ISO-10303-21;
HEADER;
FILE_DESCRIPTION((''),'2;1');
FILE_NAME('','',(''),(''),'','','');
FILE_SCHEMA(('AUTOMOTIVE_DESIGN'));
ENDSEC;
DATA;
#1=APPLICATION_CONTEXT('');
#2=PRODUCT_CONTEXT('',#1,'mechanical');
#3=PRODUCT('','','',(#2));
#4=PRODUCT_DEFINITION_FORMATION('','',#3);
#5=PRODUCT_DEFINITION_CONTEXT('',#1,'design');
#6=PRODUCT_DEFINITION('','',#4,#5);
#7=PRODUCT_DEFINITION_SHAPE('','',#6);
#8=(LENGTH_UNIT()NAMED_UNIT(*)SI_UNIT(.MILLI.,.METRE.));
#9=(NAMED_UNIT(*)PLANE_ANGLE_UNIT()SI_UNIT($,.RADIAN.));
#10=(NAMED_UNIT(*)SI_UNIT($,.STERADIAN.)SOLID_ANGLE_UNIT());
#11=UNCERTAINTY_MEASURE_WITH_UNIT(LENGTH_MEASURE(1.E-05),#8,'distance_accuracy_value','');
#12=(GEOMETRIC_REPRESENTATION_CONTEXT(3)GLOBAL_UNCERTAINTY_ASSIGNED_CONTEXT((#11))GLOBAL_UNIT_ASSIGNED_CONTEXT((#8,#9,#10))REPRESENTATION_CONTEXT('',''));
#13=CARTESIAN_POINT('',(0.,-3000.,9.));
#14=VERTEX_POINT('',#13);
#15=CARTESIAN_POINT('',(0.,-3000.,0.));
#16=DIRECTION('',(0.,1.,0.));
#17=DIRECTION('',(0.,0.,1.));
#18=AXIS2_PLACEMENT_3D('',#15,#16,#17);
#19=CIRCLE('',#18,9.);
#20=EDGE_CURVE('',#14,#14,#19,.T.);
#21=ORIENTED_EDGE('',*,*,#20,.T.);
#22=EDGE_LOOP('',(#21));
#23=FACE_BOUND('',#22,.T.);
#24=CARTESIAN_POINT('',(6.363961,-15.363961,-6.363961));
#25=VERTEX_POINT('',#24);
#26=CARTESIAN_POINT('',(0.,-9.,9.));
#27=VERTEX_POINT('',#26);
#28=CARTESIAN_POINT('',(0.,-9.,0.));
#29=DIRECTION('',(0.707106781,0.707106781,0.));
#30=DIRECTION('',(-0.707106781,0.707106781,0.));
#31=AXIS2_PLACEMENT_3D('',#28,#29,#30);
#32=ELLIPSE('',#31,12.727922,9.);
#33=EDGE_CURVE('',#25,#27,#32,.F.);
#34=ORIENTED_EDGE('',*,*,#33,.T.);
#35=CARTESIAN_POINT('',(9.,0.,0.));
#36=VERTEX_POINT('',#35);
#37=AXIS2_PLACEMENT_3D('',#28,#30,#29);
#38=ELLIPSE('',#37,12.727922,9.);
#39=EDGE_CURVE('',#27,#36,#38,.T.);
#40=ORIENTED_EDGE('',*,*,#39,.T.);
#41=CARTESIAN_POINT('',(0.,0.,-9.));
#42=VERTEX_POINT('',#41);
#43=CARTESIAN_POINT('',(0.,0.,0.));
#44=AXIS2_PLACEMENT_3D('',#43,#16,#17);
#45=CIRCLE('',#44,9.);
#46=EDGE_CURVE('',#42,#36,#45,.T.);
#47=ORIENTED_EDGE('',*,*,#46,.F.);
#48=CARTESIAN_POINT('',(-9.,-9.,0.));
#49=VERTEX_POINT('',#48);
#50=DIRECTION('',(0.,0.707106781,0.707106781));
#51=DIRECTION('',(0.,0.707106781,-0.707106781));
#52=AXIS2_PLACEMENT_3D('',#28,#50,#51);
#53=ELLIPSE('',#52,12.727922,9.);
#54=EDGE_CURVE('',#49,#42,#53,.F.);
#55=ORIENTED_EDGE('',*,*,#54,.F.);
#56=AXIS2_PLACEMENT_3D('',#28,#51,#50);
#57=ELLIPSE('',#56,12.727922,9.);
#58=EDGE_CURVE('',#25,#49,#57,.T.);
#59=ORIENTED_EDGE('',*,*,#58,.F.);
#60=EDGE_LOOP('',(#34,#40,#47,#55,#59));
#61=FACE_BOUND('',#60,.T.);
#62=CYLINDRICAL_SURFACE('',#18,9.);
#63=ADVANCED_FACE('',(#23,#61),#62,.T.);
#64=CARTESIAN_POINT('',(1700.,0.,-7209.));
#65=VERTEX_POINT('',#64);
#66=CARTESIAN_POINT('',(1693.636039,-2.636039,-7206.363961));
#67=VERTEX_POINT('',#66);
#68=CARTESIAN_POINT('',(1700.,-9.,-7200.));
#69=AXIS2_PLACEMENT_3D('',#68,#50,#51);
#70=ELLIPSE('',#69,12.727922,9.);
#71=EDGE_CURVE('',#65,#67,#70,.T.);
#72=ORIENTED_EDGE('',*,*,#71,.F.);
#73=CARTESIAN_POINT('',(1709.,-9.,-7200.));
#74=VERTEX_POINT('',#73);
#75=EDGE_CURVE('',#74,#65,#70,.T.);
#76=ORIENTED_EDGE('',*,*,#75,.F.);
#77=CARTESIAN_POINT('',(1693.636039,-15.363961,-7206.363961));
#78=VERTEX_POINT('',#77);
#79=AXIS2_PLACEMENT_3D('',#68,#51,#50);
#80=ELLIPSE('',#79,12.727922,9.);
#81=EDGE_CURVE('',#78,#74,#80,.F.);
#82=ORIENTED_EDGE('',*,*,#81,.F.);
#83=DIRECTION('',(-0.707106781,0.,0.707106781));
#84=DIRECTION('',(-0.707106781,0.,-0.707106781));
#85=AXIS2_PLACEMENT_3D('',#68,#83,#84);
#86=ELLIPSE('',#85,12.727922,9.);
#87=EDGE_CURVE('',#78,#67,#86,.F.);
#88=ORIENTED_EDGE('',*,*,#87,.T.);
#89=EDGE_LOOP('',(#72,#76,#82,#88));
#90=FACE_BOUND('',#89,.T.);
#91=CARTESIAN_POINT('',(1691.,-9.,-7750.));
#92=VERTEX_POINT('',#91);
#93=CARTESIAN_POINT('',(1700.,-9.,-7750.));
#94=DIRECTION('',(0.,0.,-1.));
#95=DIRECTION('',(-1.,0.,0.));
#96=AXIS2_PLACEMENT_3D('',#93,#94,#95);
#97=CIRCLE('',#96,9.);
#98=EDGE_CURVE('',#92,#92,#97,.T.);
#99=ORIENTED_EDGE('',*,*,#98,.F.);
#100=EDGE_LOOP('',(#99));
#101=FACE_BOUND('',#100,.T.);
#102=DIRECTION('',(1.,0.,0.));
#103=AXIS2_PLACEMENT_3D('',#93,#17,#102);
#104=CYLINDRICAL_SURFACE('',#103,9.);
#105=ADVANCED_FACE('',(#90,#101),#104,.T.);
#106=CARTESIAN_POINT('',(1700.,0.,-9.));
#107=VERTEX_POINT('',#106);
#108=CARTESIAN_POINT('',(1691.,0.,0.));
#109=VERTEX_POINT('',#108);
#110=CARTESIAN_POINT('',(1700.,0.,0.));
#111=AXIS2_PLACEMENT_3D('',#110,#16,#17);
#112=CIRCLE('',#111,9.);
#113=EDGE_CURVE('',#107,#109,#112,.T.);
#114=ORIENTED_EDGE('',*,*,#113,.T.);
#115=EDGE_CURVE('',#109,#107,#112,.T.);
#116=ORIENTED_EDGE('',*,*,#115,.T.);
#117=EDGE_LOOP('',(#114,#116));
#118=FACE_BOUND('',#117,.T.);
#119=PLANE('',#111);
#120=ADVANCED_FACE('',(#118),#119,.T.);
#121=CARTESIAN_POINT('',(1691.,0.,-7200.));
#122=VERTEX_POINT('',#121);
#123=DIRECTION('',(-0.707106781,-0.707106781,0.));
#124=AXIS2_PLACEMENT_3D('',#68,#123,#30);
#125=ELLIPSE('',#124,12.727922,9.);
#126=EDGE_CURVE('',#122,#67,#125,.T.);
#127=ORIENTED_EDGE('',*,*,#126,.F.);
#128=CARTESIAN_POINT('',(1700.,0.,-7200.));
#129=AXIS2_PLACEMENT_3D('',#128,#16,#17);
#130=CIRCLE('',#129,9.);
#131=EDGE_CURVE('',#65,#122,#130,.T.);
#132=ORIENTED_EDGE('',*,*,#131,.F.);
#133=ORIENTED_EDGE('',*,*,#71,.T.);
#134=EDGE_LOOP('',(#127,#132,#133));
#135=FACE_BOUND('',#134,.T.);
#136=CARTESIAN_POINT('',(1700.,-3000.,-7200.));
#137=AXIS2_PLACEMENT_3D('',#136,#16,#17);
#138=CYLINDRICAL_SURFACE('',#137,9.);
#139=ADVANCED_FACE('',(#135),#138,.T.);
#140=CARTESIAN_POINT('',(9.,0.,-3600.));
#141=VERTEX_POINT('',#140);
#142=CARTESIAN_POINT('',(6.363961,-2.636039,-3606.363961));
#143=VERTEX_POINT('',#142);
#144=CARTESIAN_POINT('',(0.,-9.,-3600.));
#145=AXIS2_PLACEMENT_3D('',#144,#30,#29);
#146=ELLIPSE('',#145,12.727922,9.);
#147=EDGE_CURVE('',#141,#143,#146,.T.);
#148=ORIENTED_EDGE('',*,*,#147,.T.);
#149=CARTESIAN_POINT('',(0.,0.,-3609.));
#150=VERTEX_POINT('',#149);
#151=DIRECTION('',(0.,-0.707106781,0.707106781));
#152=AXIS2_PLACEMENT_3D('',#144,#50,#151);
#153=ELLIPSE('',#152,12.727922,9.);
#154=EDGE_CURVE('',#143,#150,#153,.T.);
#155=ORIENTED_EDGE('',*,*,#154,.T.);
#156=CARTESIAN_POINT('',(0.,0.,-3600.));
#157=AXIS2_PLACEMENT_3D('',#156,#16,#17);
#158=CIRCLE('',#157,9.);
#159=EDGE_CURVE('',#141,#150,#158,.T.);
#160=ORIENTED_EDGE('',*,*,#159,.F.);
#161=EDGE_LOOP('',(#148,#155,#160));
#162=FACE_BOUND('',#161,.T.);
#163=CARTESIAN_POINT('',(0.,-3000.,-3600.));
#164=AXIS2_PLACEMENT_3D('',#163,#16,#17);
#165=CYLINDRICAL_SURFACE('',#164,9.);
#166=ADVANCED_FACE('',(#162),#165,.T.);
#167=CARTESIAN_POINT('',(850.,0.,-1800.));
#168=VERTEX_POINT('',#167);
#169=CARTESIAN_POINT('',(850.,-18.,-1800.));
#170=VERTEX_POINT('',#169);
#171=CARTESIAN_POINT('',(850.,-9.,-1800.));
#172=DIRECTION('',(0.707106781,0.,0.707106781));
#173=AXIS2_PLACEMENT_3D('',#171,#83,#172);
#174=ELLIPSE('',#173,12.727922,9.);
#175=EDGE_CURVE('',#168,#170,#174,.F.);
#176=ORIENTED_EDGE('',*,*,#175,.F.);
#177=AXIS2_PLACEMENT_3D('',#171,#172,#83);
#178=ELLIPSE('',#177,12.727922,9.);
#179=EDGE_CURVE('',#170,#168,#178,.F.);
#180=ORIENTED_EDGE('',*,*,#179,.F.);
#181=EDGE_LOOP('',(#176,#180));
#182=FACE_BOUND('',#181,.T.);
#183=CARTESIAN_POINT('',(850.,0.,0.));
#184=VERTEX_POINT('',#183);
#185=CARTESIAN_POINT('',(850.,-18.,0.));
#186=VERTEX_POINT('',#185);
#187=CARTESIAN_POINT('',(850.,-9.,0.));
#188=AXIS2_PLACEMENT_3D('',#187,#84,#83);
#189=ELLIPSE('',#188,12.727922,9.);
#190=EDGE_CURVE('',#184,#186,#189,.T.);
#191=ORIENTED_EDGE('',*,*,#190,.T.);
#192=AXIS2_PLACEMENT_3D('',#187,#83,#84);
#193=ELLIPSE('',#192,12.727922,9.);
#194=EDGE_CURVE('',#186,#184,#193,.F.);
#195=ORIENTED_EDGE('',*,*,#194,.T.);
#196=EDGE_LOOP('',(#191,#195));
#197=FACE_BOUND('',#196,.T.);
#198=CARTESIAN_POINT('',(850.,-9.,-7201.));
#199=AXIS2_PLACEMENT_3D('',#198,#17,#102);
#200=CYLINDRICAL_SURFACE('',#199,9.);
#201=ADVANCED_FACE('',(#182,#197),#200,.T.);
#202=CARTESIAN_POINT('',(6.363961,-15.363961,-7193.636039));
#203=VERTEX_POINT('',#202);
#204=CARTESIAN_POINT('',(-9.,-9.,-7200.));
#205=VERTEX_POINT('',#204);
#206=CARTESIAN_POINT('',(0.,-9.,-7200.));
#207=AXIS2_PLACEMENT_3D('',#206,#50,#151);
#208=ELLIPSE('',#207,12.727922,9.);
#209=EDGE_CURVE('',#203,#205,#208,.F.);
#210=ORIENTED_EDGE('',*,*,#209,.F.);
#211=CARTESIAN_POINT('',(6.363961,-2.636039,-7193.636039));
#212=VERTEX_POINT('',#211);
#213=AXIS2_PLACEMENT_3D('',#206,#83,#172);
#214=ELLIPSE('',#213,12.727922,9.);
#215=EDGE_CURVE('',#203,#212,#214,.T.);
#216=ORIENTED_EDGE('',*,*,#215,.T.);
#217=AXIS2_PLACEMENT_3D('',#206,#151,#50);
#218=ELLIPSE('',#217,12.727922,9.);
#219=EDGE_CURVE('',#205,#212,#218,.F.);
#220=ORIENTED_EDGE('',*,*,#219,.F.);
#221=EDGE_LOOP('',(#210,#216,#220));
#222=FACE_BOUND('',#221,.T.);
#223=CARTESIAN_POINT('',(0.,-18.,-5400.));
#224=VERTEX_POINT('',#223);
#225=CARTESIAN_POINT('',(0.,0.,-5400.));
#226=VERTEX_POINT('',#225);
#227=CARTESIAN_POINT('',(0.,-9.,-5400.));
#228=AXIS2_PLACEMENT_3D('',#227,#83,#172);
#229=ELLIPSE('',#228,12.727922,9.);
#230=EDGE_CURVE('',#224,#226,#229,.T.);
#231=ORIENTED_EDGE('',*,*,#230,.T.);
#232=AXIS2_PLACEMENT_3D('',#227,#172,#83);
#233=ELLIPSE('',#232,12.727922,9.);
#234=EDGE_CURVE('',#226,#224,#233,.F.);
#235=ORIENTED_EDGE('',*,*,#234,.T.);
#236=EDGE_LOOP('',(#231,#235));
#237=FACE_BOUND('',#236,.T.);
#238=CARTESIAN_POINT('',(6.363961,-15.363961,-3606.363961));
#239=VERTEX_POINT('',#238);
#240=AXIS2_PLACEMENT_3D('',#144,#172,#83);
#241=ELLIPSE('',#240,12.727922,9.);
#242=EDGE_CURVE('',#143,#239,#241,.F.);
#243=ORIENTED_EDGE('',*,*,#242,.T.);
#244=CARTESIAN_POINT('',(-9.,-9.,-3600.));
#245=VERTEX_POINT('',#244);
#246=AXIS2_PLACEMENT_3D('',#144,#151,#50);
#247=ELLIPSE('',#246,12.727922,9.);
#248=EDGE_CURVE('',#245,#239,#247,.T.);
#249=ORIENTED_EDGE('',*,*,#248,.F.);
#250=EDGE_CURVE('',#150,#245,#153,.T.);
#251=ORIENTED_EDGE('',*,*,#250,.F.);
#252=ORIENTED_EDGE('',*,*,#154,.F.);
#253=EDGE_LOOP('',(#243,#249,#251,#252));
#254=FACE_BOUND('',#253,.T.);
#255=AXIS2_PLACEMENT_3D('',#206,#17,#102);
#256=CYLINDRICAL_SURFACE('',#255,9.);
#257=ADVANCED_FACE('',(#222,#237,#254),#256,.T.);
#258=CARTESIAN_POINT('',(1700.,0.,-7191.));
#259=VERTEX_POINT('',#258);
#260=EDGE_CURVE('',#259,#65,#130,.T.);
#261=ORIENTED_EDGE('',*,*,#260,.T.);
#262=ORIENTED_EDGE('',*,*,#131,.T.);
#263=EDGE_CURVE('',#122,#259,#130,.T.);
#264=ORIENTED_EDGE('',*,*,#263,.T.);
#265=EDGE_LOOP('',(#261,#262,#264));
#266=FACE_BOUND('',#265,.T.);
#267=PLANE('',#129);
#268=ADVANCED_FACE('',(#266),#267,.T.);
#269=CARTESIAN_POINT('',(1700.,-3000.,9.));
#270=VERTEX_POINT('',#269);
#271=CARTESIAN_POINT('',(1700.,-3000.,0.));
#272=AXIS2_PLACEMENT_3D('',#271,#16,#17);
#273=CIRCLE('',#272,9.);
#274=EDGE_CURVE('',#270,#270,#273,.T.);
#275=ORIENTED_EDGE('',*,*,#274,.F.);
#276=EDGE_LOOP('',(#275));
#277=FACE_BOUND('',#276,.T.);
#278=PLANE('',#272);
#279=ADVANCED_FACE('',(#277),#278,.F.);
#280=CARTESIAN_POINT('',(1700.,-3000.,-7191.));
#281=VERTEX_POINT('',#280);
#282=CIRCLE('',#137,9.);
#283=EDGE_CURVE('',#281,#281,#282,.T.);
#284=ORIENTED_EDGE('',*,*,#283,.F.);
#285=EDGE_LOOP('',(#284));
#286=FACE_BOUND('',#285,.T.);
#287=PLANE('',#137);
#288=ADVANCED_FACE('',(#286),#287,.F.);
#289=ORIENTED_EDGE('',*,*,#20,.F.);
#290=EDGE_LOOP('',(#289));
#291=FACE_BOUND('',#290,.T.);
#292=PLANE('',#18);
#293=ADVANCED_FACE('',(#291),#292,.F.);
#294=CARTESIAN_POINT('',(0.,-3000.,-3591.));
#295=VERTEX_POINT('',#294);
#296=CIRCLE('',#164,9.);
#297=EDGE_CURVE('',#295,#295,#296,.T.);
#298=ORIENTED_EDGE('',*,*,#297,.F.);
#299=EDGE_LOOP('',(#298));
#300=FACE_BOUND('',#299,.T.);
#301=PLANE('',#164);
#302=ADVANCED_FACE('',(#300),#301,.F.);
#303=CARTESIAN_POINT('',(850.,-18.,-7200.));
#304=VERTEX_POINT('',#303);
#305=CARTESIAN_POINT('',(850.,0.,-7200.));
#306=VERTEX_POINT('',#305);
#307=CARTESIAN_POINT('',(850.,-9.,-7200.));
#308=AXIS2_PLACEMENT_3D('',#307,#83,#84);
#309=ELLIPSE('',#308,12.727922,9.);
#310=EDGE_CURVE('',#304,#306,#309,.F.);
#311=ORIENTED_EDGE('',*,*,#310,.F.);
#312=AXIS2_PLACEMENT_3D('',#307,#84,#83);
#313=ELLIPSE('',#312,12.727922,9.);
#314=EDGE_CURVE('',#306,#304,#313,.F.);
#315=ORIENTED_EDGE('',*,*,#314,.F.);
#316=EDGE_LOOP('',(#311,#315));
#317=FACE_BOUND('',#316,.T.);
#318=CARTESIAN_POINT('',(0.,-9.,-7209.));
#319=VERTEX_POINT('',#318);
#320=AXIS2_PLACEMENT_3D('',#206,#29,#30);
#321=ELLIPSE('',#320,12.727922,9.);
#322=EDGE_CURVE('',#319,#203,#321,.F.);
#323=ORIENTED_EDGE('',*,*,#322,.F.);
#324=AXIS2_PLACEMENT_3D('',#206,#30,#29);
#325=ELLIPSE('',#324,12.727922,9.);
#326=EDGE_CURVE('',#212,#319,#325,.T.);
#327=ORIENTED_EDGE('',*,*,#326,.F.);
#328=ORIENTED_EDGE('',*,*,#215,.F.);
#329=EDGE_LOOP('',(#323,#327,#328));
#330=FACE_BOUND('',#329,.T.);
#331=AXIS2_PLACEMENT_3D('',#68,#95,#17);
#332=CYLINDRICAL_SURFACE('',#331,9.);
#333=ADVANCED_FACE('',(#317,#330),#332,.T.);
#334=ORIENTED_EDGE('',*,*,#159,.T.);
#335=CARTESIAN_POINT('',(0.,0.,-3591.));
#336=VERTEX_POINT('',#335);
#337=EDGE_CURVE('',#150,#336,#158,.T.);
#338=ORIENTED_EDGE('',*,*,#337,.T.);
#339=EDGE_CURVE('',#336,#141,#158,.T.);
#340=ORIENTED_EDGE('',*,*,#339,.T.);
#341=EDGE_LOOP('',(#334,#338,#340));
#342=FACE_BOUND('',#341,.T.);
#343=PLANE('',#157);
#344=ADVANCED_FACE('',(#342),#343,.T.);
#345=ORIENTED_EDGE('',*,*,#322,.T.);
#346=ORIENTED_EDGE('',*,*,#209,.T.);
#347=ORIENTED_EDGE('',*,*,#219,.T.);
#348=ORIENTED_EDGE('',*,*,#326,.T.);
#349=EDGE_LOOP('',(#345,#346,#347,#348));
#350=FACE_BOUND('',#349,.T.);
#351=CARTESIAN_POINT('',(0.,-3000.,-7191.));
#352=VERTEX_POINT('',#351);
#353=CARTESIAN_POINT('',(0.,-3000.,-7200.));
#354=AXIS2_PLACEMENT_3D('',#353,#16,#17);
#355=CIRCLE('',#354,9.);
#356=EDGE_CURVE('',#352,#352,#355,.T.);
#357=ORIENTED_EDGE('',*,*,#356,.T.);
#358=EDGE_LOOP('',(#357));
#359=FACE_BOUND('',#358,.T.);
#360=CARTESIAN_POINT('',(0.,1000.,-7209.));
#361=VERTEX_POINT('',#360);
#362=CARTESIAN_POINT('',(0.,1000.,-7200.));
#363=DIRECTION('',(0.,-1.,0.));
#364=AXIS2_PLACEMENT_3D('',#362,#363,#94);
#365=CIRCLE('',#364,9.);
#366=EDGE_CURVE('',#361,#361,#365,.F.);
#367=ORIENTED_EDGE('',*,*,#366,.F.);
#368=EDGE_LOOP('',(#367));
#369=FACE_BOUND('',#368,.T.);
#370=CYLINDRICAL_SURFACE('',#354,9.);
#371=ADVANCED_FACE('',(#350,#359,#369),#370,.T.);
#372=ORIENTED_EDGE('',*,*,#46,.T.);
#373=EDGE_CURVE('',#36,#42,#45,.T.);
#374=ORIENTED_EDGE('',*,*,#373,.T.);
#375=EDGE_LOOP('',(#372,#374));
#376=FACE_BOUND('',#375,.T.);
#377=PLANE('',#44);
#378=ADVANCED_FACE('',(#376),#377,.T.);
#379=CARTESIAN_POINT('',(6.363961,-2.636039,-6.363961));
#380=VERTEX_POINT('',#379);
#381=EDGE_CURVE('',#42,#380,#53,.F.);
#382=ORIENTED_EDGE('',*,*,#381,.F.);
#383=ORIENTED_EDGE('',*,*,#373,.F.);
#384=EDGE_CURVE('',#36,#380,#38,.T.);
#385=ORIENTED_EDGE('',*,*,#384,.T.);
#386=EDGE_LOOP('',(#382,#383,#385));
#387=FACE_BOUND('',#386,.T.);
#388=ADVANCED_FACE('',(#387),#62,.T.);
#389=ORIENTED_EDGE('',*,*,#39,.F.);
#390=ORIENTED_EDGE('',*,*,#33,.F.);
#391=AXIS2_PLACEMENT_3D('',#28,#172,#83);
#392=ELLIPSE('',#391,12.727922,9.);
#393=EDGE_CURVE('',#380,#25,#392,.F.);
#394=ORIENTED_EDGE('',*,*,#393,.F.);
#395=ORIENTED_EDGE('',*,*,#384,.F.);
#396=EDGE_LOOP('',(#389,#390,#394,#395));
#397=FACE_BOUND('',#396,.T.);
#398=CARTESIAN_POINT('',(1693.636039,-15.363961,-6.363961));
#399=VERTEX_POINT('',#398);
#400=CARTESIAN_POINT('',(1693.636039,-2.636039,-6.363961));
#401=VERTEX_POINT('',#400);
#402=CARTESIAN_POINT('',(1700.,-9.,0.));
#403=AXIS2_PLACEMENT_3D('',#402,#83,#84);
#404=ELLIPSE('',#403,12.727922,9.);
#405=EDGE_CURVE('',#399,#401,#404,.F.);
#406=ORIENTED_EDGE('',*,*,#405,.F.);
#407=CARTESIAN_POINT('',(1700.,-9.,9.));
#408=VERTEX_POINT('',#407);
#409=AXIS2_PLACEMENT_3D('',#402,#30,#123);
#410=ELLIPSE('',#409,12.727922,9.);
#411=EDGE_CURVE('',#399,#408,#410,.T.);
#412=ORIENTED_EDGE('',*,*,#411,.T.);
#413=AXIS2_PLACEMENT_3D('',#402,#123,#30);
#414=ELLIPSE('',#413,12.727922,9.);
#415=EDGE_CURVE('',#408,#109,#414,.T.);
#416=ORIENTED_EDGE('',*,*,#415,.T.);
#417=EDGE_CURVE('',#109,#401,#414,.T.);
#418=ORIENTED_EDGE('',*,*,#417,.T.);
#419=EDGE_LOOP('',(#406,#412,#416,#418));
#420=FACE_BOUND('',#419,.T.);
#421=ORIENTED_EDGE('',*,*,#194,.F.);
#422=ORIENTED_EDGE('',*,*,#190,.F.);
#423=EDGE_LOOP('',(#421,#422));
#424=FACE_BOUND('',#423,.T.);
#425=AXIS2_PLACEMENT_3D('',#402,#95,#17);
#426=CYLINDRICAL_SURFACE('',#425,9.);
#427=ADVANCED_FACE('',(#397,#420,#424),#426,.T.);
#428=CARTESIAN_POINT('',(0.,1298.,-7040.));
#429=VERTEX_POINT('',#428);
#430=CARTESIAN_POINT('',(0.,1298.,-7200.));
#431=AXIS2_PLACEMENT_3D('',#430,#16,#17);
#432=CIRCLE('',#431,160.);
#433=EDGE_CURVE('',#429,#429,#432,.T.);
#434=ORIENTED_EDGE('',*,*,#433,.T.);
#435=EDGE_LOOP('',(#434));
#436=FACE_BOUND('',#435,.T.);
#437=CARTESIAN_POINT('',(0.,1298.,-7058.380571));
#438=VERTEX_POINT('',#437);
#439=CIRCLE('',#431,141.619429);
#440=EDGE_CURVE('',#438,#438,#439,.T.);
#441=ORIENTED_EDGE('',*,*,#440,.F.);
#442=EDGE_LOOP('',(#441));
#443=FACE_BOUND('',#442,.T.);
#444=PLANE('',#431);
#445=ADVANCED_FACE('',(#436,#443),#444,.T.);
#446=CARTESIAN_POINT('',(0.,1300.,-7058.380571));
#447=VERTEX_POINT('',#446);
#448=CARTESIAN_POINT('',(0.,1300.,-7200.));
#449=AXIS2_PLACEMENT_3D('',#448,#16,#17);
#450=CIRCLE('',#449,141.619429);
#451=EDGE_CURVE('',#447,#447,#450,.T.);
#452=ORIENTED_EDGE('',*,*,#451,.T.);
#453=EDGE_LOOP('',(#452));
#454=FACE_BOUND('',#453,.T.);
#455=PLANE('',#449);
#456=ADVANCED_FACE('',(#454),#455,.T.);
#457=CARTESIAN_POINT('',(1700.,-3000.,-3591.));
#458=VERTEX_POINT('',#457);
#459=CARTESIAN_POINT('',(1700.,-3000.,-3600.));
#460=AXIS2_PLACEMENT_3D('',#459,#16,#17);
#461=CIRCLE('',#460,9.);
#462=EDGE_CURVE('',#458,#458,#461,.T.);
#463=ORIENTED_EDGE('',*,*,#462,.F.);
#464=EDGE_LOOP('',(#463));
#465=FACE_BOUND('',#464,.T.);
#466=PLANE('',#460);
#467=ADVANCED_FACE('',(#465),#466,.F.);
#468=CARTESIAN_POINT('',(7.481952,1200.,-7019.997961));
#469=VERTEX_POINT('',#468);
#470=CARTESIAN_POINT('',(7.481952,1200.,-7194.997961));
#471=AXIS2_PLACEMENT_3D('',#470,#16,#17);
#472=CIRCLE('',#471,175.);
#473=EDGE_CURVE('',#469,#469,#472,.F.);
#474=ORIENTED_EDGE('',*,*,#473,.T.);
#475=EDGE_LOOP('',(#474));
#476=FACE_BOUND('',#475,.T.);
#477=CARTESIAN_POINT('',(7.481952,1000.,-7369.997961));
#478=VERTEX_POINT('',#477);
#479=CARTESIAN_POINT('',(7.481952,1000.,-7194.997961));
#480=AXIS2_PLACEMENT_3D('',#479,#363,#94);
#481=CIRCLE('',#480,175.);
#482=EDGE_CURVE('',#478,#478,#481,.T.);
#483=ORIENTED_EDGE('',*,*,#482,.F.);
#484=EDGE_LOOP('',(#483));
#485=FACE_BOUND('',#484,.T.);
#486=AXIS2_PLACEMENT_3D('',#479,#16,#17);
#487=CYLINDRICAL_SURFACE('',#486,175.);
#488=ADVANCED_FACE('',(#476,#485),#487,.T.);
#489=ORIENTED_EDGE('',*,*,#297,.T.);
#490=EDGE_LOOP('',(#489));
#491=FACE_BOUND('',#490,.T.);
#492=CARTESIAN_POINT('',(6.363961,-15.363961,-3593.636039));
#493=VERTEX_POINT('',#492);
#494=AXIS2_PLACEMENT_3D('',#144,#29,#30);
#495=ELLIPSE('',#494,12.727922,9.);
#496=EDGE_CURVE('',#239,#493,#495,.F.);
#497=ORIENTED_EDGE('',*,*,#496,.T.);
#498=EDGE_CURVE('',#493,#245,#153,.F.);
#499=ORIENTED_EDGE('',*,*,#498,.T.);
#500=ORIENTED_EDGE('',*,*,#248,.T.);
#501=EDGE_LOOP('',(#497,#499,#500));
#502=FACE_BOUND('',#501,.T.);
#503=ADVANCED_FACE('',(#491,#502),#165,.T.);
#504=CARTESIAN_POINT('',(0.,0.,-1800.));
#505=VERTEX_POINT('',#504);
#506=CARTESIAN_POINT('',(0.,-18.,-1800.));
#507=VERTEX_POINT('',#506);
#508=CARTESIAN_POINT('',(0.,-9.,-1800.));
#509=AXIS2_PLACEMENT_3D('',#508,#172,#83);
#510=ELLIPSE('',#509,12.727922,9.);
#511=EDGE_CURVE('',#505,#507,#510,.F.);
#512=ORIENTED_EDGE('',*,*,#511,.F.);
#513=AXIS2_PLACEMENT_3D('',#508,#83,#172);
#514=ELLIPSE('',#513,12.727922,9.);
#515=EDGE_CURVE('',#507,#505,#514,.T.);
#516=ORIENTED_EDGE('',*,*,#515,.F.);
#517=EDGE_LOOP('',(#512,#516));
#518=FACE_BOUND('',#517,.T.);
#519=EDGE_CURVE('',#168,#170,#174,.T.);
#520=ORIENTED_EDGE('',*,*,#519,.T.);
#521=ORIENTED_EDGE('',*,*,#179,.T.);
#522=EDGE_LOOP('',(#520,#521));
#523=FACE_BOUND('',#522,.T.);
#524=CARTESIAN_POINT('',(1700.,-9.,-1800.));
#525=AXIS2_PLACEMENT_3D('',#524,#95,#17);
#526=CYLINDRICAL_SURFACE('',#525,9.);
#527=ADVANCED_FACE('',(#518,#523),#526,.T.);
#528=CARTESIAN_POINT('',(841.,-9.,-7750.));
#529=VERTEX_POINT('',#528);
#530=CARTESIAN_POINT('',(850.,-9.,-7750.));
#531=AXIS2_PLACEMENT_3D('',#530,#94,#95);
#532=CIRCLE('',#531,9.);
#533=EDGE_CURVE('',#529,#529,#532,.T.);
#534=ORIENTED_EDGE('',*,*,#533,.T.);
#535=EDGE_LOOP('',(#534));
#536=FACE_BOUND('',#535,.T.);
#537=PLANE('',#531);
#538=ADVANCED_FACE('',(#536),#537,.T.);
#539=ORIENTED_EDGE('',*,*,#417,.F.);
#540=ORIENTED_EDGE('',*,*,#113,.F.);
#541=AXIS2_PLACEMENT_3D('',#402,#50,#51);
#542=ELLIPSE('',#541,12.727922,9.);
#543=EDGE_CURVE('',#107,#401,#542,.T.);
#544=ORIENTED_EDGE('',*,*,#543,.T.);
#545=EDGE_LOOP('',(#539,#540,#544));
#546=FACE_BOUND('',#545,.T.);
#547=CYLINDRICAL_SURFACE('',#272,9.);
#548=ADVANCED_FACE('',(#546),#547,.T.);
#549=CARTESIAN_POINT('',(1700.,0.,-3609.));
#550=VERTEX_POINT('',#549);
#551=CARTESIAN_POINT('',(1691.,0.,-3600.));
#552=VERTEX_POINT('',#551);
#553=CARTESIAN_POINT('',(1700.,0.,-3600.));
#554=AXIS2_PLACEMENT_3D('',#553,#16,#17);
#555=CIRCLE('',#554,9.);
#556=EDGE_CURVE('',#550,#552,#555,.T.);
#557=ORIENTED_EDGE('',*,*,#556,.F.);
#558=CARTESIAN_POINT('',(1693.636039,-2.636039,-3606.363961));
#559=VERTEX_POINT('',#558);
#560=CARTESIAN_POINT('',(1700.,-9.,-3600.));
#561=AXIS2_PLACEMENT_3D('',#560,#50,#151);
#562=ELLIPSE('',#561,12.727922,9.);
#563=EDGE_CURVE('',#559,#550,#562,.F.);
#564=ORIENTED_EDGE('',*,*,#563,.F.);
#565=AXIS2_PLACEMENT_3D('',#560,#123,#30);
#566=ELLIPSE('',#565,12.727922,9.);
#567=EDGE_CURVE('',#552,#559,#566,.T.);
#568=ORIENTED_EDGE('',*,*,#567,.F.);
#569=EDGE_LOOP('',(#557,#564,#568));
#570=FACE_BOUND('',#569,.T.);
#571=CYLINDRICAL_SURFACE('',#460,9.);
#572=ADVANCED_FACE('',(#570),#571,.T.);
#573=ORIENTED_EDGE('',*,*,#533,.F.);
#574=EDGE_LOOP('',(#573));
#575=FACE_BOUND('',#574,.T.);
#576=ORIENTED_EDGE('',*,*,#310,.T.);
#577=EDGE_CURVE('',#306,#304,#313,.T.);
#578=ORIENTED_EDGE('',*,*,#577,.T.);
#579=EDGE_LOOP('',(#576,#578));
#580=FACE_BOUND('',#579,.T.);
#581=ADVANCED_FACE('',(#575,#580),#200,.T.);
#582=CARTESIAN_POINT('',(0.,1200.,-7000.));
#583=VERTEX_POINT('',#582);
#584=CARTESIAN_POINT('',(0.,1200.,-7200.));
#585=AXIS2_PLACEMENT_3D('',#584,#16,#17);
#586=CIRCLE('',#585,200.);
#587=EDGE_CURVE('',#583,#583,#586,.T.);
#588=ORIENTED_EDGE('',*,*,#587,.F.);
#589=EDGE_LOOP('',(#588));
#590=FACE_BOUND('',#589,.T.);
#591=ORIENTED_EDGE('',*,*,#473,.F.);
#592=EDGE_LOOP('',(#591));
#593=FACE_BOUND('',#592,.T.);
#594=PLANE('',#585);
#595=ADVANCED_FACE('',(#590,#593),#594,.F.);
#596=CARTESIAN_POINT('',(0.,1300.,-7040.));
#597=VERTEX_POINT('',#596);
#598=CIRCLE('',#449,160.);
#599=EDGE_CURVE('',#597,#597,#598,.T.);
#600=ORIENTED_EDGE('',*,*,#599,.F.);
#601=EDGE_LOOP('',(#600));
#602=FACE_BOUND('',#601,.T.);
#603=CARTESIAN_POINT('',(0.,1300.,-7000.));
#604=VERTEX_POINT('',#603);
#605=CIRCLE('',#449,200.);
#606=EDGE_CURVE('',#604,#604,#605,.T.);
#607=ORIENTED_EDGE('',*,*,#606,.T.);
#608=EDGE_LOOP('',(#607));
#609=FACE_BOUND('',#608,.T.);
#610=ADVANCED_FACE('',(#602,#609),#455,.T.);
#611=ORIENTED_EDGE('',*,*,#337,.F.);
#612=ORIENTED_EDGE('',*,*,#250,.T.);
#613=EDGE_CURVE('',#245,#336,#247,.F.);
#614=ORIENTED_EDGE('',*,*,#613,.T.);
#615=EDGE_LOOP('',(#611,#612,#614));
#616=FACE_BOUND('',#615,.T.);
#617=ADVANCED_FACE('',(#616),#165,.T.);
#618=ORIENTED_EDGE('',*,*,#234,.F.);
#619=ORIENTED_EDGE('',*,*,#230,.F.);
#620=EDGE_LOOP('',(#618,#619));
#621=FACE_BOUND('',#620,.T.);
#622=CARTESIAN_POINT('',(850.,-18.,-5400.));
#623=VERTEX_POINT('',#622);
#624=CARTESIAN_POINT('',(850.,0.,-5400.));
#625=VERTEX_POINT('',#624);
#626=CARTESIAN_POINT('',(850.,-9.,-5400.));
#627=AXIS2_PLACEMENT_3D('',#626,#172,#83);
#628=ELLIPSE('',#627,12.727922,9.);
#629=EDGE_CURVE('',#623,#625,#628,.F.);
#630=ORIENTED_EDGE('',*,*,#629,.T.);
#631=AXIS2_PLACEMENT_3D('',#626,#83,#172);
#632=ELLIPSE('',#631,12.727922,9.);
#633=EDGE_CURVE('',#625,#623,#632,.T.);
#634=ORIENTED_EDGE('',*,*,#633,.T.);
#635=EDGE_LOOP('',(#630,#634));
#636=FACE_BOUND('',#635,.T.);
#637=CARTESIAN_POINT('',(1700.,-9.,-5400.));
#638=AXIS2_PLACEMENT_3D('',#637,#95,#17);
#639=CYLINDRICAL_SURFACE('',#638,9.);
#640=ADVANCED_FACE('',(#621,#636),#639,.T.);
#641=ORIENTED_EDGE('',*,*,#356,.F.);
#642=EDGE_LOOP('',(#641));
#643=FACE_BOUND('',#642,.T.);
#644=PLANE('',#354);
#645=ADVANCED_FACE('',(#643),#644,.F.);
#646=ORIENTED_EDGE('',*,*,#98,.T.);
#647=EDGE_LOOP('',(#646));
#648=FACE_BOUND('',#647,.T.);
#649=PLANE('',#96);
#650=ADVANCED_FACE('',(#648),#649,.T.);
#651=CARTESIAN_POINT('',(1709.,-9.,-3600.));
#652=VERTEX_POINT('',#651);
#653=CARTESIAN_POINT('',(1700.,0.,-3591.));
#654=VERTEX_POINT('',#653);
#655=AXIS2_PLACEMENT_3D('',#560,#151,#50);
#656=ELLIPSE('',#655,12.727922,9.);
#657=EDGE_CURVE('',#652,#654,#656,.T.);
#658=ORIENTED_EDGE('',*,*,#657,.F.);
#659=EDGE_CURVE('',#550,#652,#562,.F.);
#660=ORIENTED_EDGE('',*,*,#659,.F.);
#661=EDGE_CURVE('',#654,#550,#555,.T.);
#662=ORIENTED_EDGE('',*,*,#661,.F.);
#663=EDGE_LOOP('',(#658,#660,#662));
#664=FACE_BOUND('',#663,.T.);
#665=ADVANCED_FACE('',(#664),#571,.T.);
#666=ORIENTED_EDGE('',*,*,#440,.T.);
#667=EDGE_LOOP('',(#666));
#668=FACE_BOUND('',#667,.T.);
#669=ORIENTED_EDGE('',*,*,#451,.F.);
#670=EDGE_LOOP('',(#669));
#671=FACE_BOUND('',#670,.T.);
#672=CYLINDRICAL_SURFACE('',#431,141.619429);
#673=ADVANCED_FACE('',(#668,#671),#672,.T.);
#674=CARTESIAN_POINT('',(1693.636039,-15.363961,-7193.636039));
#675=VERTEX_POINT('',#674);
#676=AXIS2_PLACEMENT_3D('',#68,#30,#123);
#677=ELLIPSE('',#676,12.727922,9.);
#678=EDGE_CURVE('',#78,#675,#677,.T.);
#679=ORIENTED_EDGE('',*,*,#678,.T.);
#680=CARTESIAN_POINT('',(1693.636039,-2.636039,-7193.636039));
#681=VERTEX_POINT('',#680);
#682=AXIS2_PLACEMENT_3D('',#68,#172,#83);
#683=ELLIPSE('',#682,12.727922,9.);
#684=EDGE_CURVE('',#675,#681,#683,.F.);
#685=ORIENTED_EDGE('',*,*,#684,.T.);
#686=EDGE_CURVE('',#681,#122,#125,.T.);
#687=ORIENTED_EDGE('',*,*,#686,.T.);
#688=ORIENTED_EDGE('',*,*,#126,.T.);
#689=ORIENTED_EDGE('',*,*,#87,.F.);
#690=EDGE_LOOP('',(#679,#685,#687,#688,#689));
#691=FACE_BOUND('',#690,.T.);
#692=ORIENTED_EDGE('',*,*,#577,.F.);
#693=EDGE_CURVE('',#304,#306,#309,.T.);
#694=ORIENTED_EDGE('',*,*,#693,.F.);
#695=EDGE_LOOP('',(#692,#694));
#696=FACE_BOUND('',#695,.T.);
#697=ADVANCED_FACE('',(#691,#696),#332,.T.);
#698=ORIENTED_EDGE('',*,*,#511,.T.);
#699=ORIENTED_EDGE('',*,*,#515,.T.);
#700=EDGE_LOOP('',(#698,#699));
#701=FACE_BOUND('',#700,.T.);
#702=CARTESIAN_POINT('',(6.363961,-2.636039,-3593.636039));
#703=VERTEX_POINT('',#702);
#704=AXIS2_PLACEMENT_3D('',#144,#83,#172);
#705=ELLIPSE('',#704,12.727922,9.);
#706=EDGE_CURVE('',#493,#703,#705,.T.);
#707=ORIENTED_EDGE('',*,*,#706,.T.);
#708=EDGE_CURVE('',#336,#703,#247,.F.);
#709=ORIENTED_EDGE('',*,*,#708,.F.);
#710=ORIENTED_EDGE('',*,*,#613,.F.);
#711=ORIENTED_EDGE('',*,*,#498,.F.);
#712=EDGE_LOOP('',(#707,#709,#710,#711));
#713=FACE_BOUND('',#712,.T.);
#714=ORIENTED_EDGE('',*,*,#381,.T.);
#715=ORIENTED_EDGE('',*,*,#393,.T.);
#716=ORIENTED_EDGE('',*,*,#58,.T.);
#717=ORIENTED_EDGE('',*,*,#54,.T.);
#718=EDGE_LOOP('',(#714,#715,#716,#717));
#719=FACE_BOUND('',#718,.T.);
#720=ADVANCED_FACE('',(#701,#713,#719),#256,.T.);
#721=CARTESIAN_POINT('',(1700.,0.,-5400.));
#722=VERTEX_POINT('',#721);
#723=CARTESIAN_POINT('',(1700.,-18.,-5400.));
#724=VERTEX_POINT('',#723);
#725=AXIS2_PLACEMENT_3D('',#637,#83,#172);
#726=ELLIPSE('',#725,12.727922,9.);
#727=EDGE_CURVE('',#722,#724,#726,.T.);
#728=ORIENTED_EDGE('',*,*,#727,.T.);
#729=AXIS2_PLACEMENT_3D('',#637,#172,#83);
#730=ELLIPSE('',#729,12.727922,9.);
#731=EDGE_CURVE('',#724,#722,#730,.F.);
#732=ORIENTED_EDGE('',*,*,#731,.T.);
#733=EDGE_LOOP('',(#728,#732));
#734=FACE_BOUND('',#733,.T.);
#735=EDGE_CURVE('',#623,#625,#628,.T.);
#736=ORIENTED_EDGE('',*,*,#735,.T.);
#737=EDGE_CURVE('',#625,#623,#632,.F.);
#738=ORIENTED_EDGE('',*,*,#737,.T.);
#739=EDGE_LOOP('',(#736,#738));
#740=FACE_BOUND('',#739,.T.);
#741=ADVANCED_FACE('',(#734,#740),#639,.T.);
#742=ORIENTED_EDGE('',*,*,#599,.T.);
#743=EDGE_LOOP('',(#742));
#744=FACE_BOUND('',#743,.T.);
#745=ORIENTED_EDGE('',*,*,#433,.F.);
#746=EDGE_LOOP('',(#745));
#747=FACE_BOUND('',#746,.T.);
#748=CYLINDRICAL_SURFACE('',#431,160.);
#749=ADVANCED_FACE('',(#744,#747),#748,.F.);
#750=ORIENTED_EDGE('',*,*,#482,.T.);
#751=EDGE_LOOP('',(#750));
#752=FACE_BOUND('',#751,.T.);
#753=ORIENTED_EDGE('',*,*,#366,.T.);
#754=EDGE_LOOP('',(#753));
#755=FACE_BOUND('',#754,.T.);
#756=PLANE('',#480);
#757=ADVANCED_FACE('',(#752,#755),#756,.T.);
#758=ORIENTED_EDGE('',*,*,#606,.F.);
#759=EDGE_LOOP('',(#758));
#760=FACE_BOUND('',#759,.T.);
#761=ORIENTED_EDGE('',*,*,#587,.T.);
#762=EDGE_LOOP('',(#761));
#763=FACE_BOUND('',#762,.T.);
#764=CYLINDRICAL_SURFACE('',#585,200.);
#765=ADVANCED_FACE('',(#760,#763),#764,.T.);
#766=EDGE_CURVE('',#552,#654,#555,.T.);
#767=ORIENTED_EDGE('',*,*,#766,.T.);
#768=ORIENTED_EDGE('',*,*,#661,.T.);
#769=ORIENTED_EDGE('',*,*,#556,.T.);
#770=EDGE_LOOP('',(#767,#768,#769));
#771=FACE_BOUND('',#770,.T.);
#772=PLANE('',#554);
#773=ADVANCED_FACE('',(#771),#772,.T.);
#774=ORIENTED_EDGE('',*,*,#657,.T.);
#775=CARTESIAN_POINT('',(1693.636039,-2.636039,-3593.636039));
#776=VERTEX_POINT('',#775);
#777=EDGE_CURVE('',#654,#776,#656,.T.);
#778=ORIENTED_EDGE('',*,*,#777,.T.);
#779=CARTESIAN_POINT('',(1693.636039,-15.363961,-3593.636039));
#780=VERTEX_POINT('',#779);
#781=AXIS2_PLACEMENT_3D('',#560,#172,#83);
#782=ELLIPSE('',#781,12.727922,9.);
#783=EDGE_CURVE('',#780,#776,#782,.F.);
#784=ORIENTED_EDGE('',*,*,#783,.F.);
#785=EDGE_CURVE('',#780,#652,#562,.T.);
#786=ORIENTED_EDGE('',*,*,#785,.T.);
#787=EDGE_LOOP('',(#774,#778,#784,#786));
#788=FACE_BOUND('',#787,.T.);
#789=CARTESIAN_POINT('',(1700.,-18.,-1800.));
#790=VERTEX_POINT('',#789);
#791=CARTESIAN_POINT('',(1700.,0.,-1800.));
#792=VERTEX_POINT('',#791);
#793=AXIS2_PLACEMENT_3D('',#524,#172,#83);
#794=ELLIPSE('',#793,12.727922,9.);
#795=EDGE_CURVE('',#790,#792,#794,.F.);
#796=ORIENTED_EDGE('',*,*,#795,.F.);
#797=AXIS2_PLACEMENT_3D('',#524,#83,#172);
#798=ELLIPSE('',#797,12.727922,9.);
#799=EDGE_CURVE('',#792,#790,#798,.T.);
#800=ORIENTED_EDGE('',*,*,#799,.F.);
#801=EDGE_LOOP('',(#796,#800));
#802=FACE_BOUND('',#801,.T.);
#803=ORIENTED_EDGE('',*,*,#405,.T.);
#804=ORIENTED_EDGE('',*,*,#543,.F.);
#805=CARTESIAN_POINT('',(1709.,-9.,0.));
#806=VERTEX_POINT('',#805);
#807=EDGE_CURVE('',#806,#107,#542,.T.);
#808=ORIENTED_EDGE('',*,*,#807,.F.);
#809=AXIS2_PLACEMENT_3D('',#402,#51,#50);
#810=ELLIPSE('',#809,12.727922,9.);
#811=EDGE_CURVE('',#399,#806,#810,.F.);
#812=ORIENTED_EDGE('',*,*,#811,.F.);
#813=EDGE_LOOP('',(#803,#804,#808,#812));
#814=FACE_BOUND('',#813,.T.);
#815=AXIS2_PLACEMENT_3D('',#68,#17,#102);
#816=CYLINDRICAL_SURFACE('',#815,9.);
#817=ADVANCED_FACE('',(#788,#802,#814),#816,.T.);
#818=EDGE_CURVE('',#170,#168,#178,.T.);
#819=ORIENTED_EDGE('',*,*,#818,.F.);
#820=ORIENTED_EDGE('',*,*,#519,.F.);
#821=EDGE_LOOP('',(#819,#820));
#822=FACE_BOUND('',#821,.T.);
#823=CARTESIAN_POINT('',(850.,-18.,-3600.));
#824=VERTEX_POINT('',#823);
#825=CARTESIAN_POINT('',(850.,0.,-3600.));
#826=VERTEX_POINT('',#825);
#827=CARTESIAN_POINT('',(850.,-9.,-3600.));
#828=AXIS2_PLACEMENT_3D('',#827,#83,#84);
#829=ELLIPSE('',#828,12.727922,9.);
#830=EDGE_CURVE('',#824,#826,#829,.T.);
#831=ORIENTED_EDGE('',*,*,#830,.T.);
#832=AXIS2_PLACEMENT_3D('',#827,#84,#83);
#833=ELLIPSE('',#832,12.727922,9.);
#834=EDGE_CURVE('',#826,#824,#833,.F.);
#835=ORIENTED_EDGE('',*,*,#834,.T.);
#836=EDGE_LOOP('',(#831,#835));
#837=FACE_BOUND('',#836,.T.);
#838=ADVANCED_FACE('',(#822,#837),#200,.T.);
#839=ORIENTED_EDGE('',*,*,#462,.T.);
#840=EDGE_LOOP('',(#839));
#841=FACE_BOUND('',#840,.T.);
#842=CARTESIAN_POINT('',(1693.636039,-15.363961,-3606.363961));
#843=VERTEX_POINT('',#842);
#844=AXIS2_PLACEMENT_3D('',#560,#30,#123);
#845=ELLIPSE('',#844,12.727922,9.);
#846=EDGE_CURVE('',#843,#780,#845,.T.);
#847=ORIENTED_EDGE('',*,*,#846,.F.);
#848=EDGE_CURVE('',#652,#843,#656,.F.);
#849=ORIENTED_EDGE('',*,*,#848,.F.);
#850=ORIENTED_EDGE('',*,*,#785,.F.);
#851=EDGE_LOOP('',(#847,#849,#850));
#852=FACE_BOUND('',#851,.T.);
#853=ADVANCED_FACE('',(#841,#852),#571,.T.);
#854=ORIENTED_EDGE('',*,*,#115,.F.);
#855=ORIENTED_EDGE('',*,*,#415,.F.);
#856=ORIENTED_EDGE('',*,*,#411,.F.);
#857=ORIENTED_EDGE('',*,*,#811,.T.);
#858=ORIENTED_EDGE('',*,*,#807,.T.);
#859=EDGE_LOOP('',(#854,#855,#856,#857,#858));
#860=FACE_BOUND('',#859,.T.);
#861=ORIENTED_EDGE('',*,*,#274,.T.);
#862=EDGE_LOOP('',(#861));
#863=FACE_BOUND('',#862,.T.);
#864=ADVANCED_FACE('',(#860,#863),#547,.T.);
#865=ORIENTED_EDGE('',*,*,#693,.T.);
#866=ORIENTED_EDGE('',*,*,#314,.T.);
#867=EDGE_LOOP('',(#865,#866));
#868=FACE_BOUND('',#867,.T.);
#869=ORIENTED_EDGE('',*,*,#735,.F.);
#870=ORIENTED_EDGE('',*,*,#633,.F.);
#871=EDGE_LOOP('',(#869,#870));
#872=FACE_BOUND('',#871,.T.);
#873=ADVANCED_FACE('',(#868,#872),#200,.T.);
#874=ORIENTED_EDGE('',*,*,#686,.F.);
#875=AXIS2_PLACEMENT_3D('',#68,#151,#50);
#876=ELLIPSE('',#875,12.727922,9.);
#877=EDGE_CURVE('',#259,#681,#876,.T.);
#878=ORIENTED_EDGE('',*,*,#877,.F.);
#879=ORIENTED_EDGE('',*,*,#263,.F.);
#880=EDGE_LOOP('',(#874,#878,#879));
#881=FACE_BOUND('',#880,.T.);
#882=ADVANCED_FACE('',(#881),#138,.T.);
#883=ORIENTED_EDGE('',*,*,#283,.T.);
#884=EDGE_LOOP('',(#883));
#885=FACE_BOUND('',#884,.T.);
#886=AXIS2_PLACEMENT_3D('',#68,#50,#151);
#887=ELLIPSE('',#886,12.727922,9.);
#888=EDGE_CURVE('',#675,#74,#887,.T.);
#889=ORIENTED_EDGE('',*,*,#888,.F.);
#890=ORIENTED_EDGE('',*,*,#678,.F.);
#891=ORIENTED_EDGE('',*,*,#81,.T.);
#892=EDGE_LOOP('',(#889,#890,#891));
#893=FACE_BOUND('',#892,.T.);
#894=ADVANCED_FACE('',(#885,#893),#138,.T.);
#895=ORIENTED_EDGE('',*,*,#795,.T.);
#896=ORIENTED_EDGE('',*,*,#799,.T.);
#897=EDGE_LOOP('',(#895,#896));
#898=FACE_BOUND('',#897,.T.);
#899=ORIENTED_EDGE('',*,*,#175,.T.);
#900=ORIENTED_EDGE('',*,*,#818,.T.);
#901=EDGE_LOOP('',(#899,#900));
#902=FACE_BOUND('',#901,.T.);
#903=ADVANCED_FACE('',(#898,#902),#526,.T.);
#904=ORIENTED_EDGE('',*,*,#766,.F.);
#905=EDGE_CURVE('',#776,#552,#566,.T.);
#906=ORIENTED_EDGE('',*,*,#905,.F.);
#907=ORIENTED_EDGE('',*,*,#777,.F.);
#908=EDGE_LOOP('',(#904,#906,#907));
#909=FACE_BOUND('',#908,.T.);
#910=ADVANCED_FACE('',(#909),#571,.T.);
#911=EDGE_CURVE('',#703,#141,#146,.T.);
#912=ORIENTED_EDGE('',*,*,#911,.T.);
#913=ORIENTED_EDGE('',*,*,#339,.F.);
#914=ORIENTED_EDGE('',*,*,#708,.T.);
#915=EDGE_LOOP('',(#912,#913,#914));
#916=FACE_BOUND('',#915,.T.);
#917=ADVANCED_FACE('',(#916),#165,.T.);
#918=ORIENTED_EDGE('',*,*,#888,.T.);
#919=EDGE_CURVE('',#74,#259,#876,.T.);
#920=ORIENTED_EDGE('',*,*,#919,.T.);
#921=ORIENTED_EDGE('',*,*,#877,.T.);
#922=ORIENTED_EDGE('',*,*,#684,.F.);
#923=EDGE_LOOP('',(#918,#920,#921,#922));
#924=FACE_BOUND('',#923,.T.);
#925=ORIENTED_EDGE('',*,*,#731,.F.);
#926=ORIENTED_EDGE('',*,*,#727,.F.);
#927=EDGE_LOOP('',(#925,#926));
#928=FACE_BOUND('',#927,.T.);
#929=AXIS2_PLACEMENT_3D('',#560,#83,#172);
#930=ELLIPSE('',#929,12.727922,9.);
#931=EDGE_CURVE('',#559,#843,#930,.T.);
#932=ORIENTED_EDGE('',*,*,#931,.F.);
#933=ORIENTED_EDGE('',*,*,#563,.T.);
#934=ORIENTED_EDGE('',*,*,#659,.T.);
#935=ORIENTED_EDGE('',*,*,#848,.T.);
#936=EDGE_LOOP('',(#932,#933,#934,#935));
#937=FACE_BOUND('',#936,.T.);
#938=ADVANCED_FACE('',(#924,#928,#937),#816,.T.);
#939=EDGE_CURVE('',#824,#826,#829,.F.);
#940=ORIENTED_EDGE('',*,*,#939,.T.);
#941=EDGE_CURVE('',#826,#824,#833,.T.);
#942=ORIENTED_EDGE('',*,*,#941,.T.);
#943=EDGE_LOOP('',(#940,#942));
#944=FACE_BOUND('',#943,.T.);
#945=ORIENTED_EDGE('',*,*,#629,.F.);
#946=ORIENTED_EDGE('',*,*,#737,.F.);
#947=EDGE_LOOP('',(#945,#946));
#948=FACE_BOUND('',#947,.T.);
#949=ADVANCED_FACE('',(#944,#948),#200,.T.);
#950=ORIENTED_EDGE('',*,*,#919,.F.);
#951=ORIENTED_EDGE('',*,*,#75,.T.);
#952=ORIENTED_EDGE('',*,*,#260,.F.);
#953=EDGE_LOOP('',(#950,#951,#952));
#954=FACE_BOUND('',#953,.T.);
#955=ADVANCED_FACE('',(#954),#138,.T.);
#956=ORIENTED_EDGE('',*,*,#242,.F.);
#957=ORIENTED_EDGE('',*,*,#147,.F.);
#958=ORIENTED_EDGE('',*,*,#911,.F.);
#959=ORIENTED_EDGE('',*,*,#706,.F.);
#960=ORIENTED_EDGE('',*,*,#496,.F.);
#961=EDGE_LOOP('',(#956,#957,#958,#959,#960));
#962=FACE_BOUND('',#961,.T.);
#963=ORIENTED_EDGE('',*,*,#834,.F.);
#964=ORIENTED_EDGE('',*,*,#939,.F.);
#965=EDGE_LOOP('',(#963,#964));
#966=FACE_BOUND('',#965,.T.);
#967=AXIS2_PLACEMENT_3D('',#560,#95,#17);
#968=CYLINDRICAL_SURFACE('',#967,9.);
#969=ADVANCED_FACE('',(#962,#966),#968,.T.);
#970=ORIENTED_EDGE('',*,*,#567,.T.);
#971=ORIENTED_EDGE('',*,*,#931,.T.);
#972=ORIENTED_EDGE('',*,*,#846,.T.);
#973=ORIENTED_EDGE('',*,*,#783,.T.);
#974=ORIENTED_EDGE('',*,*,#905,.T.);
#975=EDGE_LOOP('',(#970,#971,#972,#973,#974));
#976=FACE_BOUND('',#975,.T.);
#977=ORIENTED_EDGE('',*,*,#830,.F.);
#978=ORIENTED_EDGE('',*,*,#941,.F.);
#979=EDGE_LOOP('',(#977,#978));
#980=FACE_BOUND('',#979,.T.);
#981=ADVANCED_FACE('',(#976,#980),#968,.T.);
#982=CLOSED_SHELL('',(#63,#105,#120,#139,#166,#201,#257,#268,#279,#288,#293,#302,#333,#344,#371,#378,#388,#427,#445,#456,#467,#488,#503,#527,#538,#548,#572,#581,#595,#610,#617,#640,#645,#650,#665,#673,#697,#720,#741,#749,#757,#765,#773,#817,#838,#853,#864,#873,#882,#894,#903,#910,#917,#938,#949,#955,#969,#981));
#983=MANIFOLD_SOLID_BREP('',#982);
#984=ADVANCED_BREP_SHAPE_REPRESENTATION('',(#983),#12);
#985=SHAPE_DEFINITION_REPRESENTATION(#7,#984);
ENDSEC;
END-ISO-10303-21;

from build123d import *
from build123d.topology import SkipClean

# Parameters (mm, degrees)
CROQUIS1_R               = 9
SALIENTE_EXTRUIR1_DEPTH  = 3000
CROQUIS2_R               = 9
SALIENTE_EXTRUIR2_DEPTH  = 7200
MATRIZL2_COUNT           = 3
MATRIZL2_PITCH           = 3600
CROQUIS3_R               = 9
SALIENTE_EXTRUIR3_DEPTH  = 1700
MATRIZL3_COUNT           = 2
MATRIZL3_PITCH           = 1700
SALIENTE_EXTRUIR5_START  = 1300
CROQUIS6_R               = 9
SALIENTE_EXTRUIR5_DEPTH  = 1300
CROQUIS7_R               = 200
SALIENTE_EXTRUIR6_DEPTH  = 100
CROQUIS8_R               = 175
SALIENTE_EXTRUIR7_DEPTH  = 200
CROQUIS12_R              = 9
SALIENTE_EXTRUIR8_DEPTH  = 7200
MATRIZL4_COUNT           = 3
MATRIZL4_PITCH           = 3600
CROQUIS13_R              = 9
SALIENTE_EXTRUIR10_DEPTH = 3000
CROQUIS15_R              = 9
SALIENTE_EXTRUIR11_DEPTH = 550
CROQUIS17_R              = 9
SALIENTE_EXTRUIR12_DEPTH = 7201
CROQUIS18_R              = 9
SALIENTE_EXTRUIR14_DEPTH = 1700
CROQUIS19_R              = 160
CROQUIS19_R_2            = 141.619429307
CORTAR_EXTRUIR1_DEPTH    = 2
CROQUIS20_R              = 9
SALIENTE_EXTRUIR15_DEPTH = 550


with BuildPart() as part:
    # Croquis1 → Saliente-Extruir1 (new body)
    with BuildSketch(Plane(origin=(0, 0, 0), x_dir=(1, 0, 0), z_dir=(0, 1, 0))):
        Circle(CROQUIS1_R)
    saliente_extruir1 = extrude(amount=-SALIENTE_EXTRUIR1_DEPTH)

    # Croquis2 → Saliente-Extruir2 (add)
    with BuildSketch(Plane.XY):
        with Locations((0, -9)):
            Circle(CROQUIS2_R)
    extrude(amount=-SALIENTE_EXTRUIR2_DEPTH)

    # MatrizL2: Saliente-Extruir1 ×3
    with Locations(*[(0, 0, -i * MATRIZL2_PITCH) for i in range(1, MATRIZL2_COUNT)]):
        add(saliente_extruir1)

    # Croquis3 → Saliente-Extruir3 (add)
    with BuildSketch(Plane(origin=(0, 0, 0), x_dir=(0, 0, -1), z_dir=(1, 0, 0))):
        with Locations((0, -9)):
            Circle(CROQUIS3_R)
    saliente_extruir3 = extrude(amount=SALIENTE_EXTRUIR3_DEPTH)

    # MatrizL3: Saliente-Extruir1 ×2
    with Locations(*[(i * MATRIZL3_PITCH, 0, 0) for i in range(1, MATRIZL3_COUNT)]):
        add(saliente_extruir1)

    # Croquis6 → Saliente-Extruir5 (add)
    with BuildSketch(Plane(origin=(0, 0, 0), x_dir=(1, 0, 0), z_dir=(0, 1, 0)).offset(SALIENTE_EXTRUIR5_START)):
        with Locations((0, 7200)):
            Circle(CROQUIS6_R)
    extrude(amount=-SALIENTE_EXTRUIR5_DEPTH)

    # Croquis7 → Saliente-Extruir6 (add)
    with BuildSketch(Plane(origin=(0, 1300, 0), x_dir=(1, 0, 0), z_dir=(0, 1, 0))):
        with Locations((0, 7200)):
            Circle(CROQUIS7_R)
    extrude(amount=-SALIENTE_EXTRUIR6_DEPTH)

    # Croquis8 → Saliente-Extruir7 (add)
    with BuildSketch(Plane.XZ.offset(-1200)):
        with Locations((7.481952141, -7194.997961199)):
            Circle(CROQUIS8_R)
    extrude(amount=SALIENTE_EXTRUIR7_DEPTH)

    # Croquis12 → Saliente-Extruir8 (add)
    with SkipClean():  # the faces are left unmerged after this step: merging them gives an invalid solid
        with BuildSketch(Plane(origin=(0, 0, 0), x_dir=(-1, 0, 0), z_dir=(0, 0, -1))):
            with Locations((-1700, -9)):
                Circle(CROQUIS12_R)
        extrude(amount=SALIENTE_EXTRUIR8_DEPTH)

    # MatrizL4: Saliente-Extruir3 ×3
    with SkipClean():  # the faces are left unmerged after this step: merging them gives an invalid solid
        with Locations(*[(0, 0, -i * MATRIZL4_PITCH) for i in range(1, MATRIZL4_COUNT)]):
            add(saliente_extruir3)

    # Croquis13 → Saliente-Extruir10 (add)
    with SkipClean():  # the faces are left unmerged after this step: merging them gives an invalid solid
        with BuildSketch(Plane(origin=(0, 0, 0), x_dir=(1, 0, 0), z_dir=(0, 1, 0))):
            with Locations((0, 3600)):
                Circle(CROQUIS13_R)
            with Locations((1700, 3600)):
                Circle(CROQUIS13_R)
            with Locations((1700, 7200)):
                Circle(CROQUIS13_R)
        extrude(amount=-SALIENTE_EXTRUIR10_DEPTH)

    # Croquis15 → Saliente-Extruir11 (add)
    with SkipClean():  # the faces are left unmerged after this step: merging them gives an invalid solid
        with BuildSketch(Plane(origin=(0, 0, -7200), x_dir=(-1, 0, 0), z_dir=(0, 0, -1))):
            with Locations((-1700, -9)):
                Circle(CROQUIS15_R)
        extrude(amount=SALIENTE_EXTRUIR11_DEPTH)

    # Croquis17 → Saliente-Extruir12 (add)
    with SkipClean():  # the faces are left unmerged after this step: merging them gives an invalid solid
        with BuildSketch(Plane(origin=(0, 0, 0), x_dir=(-1, 0, 0), z_dir=(0, 0, -1))):
            with Locations((-850, -9)):
                Circle(CROQUIS17_R)
        extrude(amount=SALIENTE_EXTRUIR12_DEPTH)

    # Croquis18 → Saliente-Extruir14 (add)
    with SkipClean():  # the faces are left unmerged after this step: merging them gives an invalid solid
        with BuildSketch(Plane(origin=(0, 0, 0), x_dir=(0, 0, -1), z_dir=(1, 0, 0))):
            with Locations((1800, -9)):
                Circle(CROQUIS18_R)
            with Locations((5400, -9)):
                Circle(CROQUIS18_R)
        extrude(amount=SALIENTE_EXTRUIR14_DEPTH)

    # Croquis19 → Cortar-Extruir1 (cut)
    with SkipClean():  # the faces are left unmerged after this step: merging them gives an invalid solid
        with BuildSketch(Plane(origin=(0, 1300, 0), x_dir=(1, 0, 0), z_dir=(0, 1, 0))):
            with Locations((0, 7200)):
                Circle(CROQUIS19_R)
            with Locations((0, 7200)):
                Circle(CROQUIS19_R_2, mode=Mode.SUBTRACT)
        extrude(amount=-CORTAR_EXTRUIR1_DEPTH, mode=Mode.SUBTRACT)

    # Croquis20 → Saliente-Extruir15 (add)
    with SkipClean():  # the faces are left unmerged after this step: merging them gives an invalid solid
        with BuildSketch(Plane(origin=(0, 0, -7200), x_dir=(-1, 0, 0), z_dir=(0, 0, -1))):
            with Locations((-850, -9)):
                Circle(CROQUIS20_R)
        extrude(amount=SALIENTE_EXTRUIR15_DEPTH)


solid = part.part
